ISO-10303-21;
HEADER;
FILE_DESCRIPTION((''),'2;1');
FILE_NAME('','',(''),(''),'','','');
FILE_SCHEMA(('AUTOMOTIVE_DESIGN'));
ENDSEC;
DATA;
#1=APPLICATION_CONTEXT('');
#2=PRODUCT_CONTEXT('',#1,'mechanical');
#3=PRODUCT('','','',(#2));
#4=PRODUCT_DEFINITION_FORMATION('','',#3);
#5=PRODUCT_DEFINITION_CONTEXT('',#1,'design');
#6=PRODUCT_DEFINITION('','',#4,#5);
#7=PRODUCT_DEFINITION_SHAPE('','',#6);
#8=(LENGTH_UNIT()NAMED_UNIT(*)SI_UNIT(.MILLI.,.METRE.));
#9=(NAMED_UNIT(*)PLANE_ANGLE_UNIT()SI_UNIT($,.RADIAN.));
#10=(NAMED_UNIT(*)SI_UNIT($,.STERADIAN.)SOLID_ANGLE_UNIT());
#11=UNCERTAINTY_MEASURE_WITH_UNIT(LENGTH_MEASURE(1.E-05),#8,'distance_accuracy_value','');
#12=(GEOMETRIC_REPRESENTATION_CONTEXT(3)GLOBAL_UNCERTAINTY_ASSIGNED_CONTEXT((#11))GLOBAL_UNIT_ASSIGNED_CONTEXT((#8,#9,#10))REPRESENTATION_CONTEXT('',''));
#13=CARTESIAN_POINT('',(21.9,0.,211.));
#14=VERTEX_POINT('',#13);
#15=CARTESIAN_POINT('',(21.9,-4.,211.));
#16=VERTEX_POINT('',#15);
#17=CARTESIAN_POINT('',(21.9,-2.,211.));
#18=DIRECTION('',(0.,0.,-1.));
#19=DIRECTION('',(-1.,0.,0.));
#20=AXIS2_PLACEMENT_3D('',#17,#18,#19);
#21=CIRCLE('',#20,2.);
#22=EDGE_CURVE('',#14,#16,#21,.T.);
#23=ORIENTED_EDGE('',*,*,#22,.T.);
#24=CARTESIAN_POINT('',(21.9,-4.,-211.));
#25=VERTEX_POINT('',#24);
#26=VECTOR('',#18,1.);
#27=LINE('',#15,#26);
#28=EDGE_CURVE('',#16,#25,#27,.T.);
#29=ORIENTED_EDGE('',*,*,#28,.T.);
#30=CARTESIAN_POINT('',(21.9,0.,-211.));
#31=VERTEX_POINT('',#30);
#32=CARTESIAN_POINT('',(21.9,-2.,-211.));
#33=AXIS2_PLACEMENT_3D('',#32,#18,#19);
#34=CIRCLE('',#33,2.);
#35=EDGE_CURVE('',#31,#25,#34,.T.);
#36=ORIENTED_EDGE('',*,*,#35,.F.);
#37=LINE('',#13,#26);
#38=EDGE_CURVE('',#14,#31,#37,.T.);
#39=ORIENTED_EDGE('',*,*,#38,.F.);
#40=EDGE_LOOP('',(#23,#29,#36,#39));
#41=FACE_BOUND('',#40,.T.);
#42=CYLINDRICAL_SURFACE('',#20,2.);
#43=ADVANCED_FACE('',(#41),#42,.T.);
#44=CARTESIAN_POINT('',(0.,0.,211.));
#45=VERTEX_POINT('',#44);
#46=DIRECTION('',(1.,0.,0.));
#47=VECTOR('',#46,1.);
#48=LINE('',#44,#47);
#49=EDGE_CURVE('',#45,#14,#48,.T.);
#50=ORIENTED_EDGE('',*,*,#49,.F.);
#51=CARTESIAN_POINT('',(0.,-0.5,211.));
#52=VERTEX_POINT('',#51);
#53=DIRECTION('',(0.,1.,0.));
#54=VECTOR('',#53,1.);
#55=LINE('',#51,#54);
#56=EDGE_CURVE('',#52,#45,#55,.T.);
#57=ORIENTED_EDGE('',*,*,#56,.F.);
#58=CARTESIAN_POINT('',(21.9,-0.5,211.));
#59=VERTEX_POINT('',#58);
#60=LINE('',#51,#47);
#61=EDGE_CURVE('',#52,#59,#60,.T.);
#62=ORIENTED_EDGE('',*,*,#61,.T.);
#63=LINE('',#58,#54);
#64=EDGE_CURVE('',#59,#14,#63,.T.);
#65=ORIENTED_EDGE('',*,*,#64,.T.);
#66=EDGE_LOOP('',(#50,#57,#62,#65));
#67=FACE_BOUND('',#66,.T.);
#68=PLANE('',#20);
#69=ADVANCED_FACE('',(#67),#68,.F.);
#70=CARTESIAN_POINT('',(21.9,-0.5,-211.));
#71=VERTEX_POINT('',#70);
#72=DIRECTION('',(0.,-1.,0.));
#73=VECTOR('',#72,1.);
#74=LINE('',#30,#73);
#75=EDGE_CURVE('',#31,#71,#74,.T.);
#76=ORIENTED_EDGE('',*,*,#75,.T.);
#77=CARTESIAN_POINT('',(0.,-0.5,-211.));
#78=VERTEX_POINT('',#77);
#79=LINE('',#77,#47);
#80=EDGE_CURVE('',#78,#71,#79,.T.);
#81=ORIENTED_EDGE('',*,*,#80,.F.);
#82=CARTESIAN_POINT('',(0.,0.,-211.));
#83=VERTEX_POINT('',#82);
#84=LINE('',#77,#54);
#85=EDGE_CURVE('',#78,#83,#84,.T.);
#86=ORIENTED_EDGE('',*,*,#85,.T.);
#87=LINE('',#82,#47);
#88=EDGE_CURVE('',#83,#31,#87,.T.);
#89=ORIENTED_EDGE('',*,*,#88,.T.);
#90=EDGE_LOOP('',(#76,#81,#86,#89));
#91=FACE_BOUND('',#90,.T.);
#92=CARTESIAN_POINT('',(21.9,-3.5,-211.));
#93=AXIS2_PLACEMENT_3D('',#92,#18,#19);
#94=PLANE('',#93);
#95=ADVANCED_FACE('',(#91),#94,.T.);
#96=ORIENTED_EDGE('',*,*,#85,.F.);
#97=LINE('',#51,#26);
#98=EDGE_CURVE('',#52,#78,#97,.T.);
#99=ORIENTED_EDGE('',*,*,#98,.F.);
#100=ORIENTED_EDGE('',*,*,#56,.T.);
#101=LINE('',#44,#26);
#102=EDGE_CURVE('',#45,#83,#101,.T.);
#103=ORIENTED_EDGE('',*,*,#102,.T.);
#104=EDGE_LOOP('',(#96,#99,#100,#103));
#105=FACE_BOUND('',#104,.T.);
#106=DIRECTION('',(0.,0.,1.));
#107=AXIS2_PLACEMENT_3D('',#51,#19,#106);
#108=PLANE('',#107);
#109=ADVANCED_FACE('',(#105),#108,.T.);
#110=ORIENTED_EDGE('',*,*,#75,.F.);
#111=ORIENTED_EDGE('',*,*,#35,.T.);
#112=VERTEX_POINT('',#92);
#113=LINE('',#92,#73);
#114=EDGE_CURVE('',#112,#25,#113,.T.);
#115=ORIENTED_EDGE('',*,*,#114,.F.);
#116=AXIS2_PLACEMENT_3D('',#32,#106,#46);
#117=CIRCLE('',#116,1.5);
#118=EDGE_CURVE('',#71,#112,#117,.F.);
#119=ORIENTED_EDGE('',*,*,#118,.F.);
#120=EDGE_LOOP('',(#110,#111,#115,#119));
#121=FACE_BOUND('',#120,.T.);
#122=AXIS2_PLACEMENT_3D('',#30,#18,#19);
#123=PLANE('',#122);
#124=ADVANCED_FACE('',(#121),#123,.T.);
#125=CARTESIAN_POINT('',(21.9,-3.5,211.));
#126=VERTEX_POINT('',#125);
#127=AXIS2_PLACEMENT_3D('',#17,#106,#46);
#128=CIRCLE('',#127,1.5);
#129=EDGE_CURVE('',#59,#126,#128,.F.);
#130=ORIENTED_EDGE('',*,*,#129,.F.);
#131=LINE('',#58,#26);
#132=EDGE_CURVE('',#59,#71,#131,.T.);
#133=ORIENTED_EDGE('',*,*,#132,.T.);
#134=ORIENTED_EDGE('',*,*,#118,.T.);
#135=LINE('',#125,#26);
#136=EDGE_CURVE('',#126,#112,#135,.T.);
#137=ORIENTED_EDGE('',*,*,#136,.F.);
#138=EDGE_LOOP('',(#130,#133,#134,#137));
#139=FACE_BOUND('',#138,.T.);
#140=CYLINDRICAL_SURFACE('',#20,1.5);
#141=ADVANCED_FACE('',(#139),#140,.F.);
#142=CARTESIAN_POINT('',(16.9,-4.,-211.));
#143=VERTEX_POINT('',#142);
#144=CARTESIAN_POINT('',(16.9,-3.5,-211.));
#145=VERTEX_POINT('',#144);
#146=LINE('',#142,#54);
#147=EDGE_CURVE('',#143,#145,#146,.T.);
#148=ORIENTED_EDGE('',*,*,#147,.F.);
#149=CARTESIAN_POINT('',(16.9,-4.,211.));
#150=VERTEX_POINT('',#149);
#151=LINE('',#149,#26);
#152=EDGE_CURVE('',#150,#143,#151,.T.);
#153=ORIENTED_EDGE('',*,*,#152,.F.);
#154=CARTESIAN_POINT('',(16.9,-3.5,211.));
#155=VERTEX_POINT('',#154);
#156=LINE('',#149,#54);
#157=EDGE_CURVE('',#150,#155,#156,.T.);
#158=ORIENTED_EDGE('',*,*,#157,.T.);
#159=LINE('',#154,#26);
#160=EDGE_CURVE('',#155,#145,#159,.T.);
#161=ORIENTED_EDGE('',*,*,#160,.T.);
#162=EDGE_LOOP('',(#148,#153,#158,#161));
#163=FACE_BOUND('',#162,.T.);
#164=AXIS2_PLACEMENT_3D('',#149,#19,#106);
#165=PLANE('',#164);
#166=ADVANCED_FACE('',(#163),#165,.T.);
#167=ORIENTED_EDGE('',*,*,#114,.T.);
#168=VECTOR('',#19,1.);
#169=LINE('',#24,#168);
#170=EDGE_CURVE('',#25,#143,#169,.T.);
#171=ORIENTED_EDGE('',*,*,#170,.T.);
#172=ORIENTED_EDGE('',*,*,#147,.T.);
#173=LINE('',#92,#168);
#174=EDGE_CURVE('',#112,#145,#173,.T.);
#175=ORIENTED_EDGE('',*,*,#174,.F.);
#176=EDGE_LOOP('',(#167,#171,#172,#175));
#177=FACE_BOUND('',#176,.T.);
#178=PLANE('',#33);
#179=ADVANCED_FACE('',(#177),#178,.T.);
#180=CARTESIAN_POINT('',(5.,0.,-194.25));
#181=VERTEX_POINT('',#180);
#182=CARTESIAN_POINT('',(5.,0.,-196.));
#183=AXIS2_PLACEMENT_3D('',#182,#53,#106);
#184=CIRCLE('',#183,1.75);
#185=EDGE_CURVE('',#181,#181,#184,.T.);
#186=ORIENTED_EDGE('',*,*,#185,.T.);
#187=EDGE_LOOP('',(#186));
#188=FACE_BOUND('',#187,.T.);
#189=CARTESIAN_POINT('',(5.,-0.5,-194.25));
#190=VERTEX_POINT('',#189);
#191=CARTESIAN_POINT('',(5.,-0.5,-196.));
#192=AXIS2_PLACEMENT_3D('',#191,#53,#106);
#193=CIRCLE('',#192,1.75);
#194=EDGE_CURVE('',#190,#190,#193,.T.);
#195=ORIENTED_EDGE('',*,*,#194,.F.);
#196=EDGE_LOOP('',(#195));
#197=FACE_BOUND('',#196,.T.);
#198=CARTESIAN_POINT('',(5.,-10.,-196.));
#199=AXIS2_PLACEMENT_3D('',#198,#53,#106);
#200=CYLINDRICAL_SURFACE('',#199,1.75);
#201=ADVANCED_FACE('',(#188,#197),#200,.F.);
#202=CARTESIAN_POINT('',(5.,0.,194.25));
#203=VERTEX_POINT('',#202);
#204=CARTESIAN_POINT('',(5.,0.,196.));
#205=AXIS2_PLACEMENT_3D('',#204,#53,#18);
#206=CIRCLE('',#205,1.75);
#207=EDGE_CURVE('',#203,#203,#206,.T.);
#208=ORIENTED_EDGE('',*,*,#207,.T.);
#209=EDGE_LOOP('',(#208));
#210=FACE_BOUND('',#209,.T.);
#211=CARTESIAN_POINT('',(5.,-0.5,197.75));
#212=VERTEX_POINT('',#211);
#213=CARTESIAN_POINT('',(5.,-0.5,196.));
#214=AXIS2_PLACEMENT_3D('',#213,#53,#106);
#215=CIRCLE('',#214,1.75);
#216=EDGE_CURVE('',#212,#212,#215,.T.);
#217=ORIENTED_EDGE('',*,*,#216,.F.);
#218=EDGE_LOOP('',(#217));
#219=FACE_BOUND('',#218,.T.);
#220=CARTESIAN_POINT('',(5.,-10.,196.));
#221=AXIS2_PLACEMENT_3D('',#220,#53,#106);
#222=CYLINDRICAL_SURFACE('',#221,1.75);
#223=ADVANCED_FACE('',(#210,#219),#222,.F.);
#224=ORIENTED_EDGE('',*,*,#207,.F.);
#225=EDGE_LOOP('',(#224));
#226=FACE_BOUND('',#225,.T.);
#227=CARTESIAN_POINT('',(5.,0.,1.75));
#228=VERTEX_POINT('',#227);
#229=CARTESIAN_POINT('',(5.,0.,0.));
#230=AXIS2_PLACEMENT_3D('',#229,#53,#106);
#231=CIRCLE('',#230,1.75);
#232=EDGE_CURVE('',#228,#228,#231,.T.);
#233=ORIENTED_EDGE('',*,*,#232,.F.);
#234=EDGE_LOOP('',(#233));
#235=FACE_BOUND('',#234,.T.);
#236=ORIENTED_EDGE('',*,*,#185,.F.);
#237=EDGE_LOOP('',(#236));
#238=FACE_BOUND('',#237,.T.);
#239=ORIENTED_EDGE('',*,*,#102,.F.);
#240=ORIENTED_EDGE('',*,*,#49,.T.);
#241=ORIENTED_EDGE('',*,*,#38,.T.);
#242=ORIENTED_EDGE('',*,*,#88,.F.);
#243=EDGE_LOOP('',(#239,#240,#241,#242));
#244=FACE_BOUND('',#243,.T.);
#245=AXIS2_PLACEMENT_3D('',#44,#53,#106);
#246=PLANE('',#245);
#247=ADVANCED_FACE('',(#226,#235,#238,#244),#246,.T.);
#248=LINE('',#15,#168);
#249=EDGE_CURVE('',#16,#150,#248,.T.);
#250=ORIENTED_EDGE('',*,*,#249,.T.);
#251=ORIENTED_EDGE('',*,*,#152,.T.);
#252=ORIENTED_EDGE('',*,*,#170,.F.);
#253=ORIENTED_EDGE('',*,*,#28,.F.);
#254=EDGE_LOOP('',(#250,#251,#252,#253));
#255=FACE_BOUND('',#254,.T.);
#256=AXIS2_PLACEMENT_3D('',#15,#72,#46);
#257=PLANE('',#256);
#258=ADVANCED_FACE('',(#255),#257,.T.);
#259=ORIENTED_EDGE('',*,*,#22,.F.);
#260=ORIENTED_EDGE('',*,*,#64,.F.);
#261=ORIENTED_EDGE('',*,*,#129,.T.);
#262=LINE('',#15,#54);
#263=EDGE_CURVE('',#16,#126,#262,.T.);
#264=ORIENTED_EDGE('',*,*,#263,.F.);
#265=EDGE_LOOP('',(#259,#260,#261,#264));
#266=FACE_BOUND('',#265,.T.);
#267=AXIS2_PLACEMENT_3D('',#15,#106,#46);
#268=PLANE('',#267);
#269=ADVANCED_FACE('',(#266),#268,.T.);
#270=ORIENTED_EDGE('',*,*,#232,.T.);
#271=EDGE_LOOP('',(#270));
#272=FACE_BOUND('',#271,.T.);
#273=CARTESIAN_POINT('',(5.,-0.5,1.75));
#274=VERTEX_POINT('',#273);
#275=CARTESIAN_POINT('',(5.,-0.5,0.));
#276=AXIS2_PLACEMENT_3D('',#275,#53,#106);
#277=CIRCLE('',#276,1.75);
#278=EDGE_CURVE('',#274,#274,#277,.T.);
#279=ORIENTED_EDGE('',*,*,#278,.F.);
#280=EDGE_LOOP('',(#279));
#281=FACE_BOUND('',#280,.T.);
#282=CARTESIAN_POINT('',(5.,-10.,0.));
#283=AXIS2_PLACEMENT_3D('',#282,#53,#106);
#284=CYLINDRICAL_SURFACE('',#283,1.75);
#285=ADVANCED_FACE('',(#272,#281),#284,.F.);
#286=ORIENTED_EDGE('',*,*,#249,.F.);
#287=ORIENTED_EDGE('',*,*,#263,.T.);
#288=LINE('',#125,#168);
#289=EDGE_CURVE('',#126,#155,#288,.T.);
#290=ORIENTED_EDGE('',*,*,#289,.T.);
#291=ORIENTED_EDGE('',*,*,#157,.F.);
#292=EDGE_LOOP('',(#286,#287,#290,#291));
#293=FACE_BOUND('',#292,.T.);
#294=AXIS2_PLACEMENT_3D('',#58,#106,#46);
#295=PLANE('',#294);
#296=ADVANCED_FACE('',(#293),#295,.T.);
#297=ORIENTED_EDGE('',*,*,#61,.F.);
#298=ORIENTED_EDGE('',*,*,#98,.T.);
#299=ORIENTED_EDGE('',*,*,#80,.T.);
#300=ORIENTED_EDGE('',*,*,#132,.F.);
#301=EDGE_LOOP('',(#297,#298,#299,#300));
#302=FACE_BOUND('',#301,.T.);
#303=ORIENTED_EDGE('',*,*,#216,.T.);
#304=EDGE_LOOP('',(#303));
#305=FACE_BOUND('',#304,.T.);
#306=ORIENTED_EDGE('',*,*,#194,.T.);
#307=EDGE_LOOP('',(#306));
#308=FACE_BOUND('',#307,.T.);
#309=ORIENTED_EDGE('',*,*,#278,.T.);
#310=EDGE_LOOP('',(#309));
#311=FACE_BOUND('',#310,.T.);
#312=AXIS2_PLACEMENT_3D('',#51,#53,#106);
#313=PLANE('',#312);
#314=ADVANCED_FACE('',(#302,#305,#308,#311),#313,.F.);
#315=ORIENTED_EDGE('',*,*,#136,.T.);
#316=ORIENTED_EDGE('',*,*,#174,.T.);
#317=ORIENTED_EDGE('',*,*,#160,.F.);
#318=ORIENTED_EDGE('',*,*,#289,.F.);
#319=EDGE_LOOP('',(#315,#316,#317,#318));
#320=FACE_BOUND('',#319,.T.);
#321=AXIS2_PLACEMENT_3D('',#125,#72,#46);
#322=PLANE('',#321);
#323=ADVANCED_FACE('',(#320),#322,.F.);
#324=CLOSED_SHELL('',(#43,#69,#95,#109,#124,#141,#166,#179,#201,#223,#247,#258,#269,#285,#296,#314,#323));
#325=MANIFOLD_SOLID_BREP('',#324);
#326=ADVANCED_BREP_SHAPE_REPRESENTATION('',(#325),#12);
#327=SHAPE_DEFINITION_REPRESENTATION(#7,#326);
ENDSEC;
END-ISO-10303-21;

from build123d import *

# Parameters (mm, degrees)
BASE_FLANGE1_DEPTH = 211
SKETCH10_R         = 1.75
EXTRUDE2_DEPTH     = 10


# Sheet-metal steps are written as plain solids
with BuildPart() as part:
    # Sketch1 → Base-Flange1 (new, symmetric)
    with BuildSketch(Plane.XY):
        with BuildLine():
            Line((0, 0), (21.9, 0))
            ThreePointArc((21.9, 0), (23.9, -2), (21.9, -4))
            Line((21.9, -4), (16.9, -4))
            Line((16.9, -4), (16.9, -3.5))
            Line((16.9, -3.5), (21.9, -3.5))
            ThreePointArc((21.9, -3.5), (23.4, -2), (21.9, -0.5))
            Line((21.9, -0.5), (0, -0.5))
            Line((0, -0.5), (0, 0))
        make_face()
    extrude(amount=BASE_FLANGE1_DEPTH, both=True)

    # Sketch10 → Extrude2 (cut)
    with BuildSketch(Plane(origin=(0, 0, 0), x_dir=(1, 0, 0), z_dir=(0, 1, 0))):
        with Locations(Location((5, 0, 0), (0, 0, 270))):
            Circle(SKETCH10_R)
        with Locations(Location((5, 196, 0), (0, 0, 270))):
            Circle(SKETCH10_R)
        with Locations(Location((5, -196, 0), (0, 0, 270))):
            Circle(SKETCH10_R)
    extrude(amount=-EXTRUDE2_DEPTH, mode=Mode.SUBTRACT)


solid = part.part
